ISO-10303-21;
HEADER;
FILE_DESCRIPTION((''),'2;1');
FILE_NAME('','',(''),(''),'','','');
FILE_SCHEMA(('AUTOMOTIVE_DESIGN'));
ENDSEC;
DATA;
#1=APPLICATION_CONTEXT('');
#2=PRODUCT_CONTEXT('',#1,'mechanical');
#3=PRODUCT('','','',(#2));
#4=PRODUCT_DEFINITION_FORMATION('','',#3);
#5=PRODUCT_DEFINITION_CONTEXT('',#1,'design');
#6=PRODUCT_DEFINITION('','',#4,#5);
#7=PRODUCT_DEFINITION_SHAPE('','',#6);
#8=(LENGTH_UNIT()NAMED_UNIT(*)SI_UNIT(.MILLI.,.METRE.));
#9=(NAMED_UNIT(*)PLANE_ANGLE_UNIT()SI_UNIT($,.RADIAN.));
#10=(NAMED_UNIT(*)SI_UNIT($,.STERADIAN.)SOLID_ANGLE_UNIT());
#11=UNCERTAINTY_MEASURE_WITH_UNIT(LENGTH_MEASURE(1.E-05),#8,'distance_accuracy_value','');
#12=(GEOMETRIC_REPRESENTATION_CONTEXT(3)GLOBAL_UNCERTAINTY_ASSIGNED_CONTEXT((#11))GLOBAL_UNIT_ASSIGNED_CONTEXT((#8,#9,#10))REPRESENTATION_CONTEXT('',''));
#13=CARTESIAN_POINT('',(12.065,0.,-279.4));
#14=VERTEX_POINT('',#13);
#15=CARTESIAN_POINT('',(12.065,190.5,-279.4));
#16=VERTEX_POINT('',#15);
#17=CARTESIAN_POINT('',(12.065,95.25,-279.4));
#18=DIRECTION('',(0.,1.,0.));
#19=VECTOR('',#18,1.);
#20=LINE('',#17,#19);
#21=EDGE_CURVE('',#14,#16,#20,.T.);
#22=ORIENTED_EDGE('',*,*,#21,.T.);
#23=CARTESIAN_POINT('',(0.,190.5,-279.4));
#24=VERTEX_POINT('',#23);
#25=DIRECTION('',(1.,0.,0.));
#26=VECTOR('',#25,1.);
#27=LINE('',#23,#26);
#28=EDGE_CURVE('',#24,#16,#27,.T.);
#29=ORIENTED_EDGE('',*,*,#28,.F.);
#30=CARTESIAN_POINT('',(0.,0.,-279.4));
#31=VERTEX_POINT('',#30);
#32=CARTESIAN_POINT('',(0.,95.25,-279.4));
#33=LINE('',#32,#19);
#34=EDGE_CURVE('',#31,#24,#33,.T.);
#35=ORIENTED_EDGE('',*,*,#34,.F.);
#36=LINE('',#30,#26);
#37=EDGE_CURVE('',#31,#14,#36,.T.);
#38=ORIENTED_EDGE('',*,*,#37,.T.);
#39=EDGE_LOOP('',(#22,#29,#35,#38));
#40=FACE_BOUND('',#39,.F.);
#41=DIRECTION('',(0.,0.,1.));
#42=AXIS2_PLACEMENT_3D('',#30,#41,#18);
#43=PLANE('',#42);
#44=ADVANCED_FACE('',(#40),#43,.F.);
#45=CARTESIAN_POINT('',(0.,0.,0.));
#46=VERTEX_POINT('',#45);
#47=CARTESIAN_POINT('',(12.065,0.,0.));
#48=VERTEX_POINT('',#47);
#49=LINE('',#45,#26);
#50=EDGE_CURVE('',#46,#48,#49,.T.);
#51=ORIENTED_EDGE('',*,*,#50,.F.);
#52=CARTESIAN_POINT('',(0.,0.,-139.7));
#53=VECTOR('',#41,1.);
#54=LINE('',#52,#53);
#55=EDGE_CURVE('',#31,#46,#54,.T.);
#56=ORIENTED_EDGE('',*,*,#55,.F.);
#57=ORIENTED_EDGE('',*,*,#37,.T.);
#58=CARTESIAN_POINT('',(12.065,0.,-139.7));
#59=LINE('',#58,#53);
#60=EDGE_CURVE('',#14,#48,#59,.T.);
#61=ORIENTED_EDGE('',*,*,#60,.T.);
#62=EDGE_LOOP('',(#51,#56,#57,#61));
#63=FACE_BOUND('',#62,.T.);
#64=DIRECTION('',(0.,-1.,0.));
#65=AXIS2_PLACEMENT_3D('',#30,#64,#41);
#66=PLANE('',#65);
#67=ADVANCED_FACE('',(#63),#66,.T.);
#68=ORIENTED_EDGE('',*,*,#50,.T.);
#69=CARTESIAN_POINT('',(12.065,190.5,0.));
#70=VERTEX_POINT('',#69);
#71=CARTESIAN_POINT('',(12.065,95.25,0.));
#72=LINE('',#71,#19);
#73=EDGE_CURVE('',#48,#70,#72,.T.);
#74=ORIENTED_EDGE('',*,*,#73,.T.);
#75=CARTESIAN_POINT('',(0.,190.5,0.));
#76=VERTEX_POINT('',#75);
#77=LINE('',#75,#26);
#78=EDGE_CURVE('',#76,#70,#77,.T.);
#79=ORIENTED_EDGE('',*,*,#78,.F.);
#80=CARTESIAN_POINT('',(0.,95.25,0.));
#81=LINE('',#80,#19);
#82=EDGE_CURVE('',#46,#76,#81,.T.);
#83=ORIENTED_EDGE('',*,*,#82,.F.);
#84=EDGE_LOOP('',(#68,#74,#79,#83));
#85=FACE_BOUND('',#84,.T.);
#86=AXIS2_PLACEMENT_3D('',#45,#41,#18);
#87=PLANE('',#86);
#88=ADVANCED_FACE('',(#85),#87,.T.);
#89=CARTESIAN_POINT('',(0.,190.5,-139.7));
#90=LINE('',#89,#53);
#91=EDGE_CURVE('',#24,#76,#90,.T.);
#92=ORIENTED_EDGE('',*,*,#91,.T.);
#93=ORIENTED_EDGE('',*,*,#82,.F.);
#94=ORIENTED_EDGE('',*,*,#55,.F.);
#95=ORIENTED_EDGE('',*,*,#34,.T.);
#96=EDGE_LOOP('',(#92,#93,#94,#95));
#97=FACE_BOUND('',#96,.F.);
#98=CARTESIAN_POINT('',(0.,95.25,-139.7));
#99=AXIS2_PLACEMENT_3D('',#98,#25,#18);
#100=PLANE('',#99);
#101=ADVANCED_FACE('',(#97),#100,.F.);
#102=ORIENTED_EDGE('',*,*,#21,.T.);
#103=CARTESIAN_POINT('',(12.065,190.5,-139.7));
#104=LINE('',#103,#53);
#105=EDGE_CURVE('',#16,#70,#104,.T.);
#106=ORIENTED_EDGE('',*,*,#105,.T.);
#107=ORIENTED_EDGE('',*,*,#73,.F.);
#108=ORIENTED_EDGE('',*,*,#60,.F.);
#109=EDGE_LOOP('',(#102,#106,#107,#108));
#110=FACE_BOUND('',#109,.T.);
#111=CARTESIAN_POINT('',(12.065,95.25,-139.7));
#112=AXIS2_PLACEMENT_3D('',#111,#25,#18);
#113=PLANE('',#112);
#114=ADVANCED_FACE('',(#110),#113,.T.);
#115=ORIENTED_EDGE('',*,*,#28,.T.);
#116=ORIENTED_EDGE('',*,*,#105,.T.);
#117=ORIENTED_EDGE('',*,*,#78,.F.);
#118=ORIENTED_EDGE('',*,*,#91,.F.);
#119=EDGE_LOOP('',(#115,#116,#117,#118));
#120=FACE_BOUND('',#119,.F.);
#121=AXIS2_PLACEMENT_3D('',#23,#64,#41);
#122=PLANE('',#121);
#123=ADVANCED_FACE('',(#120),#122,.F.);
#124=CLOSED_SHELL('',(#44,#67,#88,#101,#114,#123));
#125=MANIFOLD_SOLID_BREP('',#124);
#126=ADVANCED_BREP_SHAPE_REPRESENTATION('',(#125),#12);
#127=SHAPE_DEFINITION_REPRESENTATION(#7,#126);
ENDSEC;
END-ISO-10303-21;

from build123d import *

# Parameters (mm, degrees)
F0_W     = 190.5
F0_H     = 279.4
F2_DEPTH = 12.065


# Not quite as in the source:
# - a variable given as a bare number and used for a length is read in inches; the dataset says mm whatever the document's units were


with BuildPart() as f2:
    # F0 (on Right) → F2 (new body)
    with BuildSketch(Plane.YZ):
        with Locations((95.25, -139.7)):
            Rectangle(F0_W, F0_H)
    extrude(amount=F2_DEPTH)


solid = f2.part
